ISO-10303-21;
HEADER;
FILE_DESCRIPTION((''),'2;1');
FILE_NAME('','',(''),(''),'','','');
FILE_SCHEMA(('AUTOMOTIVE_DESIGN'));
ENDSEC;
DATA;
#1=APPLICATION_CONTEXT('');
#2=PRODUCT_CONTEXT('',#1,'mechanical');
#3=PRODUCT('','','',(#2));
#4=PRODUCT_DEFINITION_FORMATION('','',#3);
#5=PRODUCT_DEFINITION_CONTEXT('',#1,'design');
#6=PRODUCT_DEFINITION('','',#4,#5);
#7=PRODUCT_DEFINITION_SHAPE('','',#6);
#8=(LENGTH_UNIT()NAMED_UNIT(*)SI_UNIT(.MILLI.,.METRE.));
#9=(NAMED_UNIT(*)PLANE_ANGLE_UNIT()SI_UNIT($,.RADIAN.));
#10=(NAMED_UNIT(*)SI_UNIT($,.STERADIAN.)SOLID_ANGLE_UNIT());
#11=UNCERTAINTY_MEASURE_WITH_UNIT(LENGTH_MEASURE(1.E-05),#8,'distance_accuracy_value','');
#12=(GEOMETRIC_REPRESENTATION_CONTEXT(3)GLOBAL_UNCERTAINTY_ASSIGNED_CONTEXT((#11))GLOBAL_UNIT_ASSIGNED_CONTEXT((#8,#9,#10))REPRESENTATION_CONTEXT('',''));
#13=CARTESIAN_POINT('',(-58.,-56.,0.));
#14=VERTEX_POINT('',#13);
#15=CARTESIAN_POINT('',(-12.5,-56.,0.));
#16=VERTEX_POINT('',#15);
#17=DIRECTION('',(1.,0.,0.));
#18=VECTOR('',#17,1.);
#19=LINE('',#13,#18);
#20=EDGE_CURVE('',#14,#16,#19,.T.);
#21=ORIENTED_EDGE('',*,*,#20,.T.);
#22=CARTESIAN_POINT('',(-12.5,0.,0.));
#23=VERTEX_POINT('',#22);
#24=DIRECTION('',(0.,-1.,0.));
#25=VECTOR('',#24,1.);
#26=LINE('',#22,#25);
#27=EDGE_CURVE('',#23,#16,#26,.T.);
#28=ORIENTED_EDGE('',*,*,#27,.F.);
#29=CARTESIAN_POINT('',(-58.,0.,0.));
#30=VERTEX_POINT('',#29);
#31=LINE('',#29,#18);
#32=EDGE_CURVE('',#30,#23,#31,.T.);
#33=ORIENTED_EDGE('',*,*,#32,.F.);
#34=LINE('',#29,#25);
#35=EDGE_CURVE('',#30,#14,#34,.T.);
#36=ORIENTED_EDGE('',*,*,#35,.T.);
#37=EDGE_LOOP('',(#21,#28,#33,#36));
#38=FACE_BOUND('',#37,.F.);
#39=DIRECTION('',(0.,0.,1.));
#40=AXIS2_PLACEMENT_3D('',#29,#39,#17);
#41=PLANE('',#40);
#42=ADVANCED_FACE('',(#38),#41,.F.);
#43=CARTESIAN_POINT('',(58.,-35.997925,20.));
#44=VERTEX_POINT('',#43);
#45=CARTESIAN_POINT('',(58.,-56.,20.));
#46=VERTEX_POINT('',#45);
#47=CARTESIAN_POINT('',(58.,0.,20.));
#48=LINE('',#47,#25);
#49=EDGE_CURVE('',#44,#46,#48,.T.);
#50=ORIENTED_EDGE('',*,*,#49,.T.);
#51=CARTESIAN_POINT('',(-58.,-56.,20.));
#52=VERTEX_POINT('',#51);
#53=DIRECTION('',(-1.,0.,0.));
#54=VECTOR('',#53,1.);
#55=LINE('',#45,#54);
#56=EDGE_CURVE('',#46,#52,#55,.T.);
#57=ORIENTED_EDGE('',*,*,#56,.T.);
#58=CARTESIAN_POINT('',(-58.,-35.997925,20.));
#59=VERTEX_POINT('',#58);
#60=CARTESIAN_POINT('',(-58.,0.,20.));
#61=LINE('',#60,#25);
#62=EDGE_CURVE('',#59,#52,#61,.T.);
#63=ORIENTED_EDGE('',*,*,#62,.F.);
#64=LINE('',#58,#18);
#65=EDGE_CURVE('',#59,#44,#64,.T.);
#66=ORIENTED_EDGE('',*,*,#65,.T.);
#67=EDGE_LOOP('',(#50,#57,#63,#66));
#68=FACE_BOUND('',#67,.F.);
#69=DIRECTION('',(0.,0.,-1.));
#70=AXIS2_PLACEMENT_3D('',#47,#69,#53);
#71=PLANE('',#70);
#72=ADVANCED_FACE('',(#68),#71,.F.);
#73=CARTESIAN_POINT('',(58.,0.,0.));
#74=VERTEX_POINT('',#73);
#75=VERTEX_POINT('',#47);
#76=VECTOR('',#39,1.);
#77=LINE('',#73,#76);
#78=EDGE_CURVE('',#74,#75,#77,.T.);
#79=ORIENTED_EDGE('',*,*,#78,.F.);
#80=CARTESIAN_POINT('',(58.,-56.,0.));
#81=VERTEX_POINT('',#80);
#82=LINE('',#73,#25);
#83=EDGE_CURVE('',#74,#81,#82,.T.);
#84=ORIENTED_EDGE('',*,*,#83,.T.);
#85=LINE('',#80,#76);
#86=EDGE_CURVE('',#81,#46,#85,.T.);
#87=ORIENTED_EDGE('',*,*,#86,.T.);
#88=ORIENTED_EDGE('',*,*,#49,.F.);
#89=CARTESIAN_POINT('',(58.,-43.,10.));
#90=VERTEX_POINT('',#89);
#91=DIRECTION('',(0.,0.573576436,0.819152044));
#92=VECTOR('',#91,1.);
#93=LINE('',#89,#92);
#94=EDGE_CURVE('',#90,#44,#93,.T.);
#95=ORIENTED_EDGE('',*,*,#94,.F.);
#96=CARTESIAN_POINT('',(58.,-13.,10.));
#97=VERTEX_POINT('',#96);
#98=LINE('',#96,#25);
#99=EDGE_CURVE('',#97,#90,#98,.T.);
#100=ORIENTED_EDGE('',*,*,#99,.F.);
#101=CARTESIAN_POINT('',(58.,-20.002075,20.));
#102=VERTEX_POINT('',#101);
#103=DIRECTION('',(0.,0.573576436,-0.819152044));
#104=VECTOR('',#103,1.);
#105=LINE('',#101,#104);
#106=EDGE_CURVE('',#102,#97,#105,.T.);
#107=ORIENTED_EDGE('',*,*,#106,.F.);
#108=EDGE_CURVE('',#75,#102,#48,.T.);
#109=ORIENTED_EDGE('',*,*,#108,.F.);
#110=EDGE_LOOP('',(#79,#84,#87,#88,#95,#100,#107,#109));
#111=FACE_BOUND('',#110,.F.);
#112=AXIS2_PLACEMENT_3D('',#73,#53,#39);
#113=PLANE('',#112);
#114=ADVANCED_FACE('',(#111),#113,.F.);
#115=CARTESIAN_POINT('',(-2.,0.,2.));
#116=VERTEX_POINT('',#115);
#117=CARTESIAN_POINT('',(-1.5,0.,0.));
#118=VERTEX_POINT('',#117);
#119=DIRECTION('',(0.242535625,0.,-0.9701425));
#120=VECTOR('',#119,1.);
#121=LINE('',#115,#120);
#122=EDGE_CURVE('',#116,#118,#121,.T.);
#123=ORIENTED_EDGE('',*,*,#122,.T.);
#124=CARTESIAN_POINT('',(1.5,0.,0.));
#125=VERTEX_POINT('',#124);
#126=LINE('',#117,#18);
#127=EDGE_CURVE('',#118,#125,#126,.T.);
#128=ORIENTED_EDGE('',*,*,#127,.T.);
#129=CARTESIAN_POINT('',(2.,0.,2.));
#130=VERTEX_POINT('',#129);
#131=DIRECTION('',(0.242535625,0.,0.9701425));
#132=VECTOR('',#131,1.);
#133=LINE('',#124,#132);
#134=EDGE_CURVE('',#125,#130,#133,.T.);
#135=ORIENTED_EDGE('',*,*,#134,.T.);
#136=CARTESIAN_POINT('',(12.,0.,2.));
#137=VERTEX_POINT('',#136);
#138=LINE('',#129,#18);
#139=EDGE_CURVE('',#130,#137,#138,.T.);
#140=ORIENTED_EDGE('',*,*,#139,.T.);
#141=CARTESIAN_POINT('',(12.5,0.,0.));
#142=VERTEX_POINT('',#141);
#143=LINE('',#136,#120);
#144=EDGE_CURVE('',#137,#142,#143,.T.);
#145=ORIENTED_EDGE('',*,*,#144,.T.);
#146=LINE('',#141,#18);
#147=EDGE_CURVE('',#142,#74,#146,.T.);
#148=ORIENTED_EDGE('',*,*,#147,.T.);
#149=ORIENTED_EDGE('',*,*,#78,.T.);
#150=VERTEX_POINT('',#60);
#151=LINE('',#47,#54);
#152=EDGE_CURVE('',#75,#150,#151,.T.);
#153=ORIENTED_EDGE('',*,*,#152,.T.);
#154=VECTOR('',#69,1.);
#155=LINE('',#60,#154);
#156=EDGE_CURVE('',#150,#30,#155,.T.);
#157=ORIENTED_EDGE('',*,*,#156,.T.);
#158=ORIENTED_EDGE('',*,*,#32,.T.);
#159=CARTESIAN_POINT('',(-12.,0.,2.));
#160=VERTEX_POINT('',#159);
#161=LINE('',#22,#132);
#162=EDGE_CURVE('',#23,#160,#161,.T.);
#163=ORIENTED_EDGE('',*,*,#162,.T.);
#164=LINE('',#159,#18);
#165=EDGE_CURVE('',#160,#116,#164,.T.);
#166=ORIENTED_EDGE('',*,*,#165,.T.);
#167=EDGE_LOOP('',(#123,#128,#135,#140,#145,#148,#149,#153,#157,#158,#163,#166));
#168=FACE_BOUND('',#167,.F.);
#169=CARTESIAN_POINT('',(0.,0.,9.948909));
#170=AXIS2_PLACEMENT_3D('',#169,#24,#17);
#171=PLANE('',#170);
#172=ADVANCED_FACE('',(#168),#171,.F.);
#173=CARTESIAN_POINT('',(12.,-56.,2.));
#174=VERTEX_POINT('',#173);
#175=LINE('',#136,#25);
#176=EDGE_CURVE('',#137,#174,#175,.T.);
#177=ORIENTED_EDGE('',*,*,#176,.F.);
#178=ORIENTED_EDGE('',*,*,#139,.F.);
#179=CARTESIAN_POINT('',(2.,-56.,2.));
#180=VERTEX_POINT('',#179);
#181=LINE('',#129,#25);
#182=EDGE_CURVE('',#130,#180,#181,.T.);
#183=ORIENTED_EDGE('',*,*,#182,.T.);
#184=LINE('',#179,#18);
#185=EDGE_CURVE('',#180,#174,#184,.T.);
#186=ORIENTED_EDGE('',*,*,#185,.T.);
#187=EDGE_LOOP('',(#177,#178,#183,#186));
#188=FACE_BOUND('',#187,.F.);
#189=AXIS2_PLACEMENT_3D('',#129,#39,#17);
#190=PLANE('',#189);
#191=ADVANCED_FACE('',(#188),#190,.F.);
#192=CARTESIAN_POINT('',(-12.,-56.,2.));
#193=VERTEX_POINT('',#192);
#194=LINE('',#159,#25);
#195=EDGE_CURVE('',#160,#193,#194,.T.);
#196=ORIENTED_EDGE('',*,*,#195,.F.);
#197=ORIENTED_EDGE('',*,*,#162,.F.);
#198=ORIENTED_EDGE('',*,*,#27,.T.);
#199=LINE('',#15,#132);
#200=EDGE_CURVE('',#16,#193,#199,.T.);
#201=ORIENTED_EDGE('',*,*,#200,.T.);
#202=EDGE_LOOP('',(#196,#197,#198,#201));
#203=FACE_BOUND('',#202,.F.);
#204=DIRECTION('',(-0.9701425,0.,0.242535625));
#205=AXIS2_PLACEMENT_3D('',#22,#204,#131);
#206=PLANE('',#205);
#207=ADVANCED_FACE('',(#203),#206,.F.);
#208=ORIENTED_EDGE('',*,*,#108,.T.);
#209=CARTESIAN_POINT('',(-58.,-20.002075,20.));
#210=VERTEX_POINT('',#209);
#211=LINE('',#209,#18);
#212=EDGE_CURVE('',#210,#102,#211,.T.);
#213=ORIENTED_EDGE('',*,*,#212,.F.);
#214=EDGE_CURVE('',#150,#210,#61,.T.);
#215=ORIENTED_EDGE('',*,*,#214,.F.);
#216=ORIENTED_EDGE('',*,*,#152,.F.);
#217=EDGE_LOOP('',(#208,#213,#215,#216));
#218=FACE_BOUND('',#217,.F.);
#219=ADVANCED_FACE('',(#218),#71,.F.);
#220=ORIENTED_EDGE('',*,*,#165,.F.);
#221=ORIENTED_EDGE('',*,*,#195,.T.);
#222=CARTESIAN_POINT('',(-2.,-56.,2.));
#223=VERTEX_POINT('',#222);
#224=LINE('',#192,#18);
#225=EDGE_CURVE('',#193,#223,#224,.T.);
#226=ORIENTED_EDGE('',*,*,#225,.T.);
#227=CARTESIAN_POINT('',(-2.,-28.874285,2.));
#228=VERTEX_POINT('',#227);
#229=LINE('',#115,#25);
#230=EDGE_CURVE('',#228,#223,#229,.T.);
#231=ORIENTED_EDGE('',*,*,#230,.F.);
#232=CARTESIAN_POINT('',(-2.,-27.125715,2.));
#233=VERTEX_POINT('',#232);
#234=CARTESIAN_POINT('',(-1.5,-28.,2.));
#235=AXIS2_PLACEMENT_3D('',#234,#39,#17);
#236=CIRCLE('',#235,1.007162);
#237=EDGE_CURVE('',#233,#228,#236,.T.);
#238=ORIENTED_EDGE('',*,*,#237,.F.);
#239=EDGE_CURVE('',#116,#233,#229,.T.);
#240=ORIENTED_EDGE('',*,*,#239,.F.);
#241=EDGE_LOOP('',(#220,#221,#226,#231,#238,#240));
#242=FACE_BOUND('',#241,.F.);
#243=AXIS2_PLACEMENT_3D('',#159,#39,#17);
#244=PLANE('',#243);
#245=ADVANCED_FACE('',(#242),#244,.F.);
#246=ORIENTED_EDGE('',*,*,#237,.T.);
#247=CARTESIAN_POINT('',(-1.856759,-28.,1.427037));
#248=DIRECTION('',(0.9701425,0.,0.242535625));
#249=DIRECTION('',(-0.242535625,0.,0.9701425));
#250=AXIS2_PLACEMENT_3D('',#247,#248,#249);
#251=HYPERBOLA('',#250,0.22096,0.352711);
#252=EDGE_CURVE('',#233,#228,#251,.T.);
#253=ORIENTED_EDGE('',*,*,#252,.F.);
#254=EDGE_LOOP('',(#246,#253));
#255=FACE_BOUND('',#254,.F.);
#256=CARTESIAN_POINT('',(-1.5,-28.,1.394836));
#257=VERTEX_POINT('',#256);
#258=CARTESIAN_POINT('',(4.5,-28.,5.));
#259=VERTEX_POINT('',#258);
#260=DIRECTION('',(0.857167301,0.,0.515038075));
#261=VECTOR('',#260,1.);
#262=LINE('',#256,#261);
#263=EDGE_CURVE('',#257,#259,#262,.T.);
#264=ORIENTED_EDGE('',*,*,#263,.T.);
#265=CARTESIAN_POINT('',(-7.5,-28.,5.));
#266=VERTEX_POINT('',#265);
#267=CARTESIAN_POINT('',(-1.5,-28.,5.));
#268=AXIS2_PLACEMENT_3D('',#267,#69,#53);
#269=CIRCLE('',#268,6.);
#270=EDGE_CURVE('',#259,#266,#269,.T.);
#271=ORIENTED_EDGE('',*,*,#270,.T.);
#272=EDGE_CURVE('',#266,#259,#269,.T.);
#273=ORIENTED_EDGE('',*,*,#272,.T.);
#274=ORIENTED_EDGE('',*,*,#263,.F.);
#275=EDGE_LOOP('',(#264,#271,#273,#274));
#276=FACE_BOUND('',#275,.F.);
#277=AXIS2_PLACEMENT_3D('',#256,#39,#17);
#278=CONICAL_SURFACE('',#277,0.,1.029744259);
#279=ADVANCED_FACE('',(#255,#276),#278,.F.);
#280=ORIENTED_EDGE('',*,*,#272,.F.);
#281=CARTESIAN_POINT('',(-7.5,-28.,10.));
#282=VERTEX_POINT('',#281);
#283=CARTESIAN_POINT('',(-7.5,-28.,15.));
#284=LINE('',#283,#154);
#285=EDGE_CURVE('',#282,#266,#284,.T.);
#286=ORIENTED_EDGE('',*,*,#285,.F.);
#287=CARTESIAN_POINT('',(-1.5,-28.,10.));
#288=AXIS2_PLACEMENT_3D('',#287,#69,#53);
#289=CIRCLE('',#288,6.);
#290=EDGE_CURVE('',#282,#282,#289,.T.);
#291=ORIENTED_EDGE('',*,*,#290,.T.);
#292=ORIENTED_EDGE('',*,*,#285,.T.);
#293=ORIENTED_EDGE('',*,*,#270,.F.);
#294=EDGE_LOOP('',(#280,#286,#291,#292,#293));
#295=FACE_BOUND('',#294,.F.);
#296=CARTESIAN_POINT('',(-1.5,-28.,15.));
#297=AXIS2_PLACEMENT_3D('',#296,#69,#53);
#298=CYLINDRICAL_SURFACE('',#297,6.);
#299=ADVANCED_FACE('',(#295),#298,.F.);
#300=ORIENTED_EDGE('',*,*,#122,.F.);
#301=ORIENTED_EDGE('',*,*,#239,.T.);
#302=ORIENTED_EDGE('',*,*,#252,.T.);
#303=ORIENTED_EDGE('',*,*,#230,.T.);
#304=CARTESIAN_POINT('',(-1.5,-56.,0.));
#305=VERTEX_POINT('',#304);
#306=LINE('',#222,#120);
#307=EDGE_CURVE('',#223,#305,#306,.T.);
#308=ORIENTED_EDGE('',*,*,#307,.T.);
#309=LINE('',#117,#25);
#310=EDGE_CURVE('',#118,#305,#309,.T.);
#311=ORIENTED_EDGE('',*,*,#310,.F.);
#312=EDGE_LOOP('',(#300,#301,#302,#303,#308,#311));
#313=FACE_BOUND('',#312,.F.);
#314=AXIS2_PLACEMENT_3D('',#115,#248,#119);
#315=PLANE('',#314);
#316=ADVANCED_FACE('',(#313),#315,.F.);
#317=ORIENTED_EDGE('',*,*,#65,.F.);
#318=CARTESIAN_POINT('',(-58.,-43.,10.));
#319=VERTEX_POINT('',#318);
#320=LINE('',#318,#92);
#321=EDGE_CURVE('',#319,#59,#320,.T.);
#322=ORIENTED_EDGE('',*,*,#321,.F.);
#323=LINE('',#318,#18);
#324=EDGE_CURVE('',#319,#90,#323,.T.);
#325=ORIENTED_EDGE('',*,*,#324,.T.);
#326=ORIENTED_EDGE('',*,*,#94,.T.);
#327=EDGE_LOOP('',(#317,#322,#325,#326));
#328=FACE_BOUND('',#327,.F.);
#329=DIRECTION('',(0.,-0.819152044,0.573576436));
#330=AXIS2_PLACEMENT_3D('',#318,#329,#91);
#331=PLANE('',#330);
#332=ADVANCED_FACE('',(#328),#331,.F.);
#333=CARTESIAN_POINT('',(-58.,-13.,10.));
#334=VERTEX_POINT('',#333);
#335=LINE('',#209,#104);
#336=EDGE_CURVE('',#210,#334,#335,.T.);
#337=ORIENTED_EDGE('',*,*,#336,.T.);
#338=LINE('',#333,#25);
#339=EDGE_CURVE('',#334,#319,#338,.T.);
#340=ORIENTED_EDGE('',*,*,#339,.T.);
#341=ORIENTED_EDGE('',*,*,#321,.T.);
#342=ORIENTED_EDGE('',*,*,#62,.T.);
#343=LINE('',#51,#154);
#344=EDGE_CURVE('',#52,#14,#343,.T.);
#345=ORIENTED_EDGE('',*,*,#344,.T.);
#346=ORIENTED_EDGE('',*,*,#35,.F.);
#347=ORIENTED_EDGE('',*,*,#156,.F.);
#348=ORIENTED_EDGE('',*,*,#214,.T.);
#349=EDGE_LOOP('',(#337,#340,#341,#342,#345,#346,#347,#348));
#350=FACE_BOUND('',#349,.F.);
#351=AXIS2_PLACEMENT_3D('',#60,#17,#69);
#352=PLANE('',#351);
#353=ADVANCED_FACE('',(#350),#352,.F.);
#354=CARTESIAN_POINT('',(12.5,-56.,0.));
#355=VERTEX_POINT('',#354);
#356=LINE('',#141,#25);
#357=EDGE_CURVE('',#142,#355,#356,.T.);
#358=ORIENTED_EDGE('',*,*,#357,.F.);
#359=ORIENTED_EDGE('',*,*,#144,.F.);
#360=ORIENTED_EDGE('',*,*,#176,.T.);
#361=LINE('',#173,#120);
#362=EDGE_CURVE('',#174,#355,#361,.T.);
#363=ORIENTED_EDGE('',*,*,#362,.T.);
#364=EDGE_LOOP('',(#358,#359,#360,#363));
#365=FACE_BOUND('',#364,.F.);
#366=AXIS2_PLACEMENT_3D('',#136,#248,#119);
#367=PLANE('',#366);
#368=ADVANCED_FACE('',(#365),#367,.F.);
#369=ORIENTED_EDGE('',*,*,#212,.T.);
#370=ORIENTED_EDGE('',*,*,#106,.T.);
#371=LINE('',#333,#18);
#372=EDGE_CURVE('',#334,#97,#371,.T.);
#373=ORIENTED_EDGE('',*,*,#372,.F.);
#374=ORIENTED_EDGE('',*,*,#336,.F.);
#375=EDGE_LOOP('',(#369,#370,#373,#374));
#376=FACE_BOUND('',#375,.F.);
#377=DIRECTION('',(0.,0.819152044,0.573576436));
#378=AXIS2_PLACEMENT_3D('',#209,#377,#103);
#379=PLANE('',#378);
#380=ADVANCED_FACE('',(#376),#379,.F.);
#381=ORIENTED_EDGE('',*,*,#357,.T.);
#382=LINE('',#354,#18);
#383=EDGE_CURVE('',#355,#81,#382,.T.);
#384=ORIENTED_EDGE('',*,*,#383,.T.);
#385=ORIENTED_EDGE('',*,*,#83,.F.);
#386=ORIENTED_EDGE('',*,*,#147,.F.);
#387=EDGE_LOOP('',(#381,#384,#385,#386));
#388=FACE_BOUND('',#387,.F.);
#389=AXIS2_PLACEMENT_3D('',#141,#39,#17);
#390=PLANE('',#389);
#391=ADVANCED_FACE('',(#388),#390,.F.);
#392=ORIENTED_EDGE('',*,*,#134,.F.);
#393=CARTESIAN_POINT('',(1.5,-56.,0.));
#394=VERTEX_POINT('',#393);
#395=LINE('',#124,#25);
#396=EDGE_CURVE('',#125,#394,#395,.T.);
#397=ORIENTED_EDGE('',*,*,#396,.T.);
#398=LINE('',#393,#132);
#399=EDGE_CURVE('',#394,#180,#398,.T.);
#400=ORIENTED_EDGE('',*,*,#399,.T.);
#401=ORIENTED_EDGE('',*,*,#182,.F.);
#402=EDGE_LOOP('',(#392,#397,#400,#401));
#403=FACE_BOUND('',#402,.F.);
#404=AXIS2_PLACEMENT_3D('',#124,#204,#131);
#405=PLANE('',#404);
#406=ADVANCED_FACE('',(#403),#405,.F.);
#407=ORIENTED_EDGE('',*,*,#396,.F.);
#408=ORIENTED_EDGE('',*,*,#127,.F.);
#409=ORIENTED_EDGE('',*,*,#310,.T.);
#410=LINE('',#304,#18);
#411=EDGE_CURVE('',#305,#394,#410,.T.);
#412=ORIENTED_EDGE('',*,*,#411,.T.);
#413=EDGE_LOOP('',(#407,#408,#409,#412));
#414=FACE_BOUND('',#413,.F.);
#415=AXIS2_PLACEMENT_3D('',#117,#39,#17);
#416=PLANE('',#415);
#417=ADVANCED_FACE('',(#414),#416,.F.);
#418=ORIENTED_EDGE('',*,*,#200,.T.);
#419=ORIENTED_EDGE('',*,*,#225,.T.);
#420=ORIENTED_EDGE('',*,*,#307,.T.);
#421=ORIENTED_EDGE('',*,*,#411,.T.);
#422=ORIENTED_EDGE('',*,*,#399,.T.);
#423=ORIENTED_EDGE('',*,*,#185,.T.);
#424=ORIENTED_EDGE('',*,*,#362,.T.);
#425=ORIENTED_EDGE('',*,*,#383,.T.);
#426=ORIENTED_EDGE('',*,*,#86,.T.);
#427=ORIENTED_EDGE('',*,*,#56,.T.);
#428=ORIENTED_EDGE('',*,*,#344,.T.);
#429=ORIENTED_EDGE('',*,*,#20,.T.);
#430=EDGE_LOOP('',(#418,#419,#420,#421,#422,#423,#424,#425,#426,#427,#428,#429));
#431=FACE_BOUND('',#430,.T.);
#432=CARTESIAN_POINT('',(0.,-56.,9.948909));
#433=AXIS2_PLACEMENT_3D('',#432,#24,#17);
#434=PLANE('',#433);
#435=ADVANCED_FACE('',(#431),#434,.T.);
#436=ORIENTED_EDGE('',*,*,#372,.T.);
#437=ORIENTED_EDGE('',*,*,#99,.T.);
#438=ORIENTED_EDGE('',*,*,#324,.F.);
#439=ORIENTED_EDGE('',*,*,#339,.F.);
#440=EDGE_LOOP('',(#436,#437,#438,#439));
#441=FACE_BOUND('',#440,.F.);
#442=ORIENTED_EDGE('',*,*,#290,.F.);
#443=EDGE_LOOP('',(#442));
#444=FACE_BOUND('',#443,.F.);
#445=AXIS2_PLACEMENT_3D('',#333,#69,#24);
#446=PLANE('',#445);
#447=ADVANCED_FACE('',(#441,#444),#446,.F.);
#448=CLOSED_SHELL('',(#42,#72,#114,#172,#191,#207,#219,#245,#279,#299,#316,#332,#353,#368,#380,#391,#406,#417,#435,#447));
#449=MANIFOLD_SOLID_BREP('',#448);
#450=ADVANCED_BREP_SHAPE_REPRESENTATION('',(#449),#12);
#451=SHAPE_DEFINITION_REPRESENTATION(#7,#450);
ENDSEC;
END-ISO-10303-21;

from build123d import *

# Parameters (mm, degrees)
F1_DEPTH = 56
F3_DEPTH = 116
F5_D     = 12
F5_DEPTH = 5
F5_TIP   = 3.6051637142


# Not quite as in the source:
# - a feature names something its author has since deleted; it is built from what else it names


with BuildPart() as f1:
    # F0 (on Front) → F1 (new body)
    with BuildSketch(Plane.XZ):
        Polygon((1.5, 0), (2, 2), (12, 2), (12.5, 0), (58, 0), (58, 20), (-58, 20), (-58, 0), (-12.5, 0), (-12, 2), (-2, 2), (-1.5, 0), (0, 0), align=None)
    extrude(amount=F1_DEPTH)

    # F2 (on face) → F3 (cut, through all)
    with BuildSketch(Plane(origin=(-58, 0, 0), x_dir=(0, -1, 0), z_dir=(-1, 0, 0))):
        Polygon((28, 20), (20.0020753821, 20), (13, 10), (28, 10), align=None)
        Polygon((35.9979246179, 20), (28, 20), (28, 10), (43, 10), align=None)
    extrude(amount=-F3_DEPTH, mode=Mode.SUBTRACT)

    # F5
    with Locations(Plane.XY.offset(10)):
        with Locations((-1.5, -28)):
            Hole(F5_D / 2, depth=F5_DEPTH)
            with Locations((0, 0, -(F5_DEPTH + F5_TIP / 2))):  # 118° drill point
                Cone(0, F5_D / 2, F5_TIP, mode=Mode.SUBTRACT)


solid = f1.part
